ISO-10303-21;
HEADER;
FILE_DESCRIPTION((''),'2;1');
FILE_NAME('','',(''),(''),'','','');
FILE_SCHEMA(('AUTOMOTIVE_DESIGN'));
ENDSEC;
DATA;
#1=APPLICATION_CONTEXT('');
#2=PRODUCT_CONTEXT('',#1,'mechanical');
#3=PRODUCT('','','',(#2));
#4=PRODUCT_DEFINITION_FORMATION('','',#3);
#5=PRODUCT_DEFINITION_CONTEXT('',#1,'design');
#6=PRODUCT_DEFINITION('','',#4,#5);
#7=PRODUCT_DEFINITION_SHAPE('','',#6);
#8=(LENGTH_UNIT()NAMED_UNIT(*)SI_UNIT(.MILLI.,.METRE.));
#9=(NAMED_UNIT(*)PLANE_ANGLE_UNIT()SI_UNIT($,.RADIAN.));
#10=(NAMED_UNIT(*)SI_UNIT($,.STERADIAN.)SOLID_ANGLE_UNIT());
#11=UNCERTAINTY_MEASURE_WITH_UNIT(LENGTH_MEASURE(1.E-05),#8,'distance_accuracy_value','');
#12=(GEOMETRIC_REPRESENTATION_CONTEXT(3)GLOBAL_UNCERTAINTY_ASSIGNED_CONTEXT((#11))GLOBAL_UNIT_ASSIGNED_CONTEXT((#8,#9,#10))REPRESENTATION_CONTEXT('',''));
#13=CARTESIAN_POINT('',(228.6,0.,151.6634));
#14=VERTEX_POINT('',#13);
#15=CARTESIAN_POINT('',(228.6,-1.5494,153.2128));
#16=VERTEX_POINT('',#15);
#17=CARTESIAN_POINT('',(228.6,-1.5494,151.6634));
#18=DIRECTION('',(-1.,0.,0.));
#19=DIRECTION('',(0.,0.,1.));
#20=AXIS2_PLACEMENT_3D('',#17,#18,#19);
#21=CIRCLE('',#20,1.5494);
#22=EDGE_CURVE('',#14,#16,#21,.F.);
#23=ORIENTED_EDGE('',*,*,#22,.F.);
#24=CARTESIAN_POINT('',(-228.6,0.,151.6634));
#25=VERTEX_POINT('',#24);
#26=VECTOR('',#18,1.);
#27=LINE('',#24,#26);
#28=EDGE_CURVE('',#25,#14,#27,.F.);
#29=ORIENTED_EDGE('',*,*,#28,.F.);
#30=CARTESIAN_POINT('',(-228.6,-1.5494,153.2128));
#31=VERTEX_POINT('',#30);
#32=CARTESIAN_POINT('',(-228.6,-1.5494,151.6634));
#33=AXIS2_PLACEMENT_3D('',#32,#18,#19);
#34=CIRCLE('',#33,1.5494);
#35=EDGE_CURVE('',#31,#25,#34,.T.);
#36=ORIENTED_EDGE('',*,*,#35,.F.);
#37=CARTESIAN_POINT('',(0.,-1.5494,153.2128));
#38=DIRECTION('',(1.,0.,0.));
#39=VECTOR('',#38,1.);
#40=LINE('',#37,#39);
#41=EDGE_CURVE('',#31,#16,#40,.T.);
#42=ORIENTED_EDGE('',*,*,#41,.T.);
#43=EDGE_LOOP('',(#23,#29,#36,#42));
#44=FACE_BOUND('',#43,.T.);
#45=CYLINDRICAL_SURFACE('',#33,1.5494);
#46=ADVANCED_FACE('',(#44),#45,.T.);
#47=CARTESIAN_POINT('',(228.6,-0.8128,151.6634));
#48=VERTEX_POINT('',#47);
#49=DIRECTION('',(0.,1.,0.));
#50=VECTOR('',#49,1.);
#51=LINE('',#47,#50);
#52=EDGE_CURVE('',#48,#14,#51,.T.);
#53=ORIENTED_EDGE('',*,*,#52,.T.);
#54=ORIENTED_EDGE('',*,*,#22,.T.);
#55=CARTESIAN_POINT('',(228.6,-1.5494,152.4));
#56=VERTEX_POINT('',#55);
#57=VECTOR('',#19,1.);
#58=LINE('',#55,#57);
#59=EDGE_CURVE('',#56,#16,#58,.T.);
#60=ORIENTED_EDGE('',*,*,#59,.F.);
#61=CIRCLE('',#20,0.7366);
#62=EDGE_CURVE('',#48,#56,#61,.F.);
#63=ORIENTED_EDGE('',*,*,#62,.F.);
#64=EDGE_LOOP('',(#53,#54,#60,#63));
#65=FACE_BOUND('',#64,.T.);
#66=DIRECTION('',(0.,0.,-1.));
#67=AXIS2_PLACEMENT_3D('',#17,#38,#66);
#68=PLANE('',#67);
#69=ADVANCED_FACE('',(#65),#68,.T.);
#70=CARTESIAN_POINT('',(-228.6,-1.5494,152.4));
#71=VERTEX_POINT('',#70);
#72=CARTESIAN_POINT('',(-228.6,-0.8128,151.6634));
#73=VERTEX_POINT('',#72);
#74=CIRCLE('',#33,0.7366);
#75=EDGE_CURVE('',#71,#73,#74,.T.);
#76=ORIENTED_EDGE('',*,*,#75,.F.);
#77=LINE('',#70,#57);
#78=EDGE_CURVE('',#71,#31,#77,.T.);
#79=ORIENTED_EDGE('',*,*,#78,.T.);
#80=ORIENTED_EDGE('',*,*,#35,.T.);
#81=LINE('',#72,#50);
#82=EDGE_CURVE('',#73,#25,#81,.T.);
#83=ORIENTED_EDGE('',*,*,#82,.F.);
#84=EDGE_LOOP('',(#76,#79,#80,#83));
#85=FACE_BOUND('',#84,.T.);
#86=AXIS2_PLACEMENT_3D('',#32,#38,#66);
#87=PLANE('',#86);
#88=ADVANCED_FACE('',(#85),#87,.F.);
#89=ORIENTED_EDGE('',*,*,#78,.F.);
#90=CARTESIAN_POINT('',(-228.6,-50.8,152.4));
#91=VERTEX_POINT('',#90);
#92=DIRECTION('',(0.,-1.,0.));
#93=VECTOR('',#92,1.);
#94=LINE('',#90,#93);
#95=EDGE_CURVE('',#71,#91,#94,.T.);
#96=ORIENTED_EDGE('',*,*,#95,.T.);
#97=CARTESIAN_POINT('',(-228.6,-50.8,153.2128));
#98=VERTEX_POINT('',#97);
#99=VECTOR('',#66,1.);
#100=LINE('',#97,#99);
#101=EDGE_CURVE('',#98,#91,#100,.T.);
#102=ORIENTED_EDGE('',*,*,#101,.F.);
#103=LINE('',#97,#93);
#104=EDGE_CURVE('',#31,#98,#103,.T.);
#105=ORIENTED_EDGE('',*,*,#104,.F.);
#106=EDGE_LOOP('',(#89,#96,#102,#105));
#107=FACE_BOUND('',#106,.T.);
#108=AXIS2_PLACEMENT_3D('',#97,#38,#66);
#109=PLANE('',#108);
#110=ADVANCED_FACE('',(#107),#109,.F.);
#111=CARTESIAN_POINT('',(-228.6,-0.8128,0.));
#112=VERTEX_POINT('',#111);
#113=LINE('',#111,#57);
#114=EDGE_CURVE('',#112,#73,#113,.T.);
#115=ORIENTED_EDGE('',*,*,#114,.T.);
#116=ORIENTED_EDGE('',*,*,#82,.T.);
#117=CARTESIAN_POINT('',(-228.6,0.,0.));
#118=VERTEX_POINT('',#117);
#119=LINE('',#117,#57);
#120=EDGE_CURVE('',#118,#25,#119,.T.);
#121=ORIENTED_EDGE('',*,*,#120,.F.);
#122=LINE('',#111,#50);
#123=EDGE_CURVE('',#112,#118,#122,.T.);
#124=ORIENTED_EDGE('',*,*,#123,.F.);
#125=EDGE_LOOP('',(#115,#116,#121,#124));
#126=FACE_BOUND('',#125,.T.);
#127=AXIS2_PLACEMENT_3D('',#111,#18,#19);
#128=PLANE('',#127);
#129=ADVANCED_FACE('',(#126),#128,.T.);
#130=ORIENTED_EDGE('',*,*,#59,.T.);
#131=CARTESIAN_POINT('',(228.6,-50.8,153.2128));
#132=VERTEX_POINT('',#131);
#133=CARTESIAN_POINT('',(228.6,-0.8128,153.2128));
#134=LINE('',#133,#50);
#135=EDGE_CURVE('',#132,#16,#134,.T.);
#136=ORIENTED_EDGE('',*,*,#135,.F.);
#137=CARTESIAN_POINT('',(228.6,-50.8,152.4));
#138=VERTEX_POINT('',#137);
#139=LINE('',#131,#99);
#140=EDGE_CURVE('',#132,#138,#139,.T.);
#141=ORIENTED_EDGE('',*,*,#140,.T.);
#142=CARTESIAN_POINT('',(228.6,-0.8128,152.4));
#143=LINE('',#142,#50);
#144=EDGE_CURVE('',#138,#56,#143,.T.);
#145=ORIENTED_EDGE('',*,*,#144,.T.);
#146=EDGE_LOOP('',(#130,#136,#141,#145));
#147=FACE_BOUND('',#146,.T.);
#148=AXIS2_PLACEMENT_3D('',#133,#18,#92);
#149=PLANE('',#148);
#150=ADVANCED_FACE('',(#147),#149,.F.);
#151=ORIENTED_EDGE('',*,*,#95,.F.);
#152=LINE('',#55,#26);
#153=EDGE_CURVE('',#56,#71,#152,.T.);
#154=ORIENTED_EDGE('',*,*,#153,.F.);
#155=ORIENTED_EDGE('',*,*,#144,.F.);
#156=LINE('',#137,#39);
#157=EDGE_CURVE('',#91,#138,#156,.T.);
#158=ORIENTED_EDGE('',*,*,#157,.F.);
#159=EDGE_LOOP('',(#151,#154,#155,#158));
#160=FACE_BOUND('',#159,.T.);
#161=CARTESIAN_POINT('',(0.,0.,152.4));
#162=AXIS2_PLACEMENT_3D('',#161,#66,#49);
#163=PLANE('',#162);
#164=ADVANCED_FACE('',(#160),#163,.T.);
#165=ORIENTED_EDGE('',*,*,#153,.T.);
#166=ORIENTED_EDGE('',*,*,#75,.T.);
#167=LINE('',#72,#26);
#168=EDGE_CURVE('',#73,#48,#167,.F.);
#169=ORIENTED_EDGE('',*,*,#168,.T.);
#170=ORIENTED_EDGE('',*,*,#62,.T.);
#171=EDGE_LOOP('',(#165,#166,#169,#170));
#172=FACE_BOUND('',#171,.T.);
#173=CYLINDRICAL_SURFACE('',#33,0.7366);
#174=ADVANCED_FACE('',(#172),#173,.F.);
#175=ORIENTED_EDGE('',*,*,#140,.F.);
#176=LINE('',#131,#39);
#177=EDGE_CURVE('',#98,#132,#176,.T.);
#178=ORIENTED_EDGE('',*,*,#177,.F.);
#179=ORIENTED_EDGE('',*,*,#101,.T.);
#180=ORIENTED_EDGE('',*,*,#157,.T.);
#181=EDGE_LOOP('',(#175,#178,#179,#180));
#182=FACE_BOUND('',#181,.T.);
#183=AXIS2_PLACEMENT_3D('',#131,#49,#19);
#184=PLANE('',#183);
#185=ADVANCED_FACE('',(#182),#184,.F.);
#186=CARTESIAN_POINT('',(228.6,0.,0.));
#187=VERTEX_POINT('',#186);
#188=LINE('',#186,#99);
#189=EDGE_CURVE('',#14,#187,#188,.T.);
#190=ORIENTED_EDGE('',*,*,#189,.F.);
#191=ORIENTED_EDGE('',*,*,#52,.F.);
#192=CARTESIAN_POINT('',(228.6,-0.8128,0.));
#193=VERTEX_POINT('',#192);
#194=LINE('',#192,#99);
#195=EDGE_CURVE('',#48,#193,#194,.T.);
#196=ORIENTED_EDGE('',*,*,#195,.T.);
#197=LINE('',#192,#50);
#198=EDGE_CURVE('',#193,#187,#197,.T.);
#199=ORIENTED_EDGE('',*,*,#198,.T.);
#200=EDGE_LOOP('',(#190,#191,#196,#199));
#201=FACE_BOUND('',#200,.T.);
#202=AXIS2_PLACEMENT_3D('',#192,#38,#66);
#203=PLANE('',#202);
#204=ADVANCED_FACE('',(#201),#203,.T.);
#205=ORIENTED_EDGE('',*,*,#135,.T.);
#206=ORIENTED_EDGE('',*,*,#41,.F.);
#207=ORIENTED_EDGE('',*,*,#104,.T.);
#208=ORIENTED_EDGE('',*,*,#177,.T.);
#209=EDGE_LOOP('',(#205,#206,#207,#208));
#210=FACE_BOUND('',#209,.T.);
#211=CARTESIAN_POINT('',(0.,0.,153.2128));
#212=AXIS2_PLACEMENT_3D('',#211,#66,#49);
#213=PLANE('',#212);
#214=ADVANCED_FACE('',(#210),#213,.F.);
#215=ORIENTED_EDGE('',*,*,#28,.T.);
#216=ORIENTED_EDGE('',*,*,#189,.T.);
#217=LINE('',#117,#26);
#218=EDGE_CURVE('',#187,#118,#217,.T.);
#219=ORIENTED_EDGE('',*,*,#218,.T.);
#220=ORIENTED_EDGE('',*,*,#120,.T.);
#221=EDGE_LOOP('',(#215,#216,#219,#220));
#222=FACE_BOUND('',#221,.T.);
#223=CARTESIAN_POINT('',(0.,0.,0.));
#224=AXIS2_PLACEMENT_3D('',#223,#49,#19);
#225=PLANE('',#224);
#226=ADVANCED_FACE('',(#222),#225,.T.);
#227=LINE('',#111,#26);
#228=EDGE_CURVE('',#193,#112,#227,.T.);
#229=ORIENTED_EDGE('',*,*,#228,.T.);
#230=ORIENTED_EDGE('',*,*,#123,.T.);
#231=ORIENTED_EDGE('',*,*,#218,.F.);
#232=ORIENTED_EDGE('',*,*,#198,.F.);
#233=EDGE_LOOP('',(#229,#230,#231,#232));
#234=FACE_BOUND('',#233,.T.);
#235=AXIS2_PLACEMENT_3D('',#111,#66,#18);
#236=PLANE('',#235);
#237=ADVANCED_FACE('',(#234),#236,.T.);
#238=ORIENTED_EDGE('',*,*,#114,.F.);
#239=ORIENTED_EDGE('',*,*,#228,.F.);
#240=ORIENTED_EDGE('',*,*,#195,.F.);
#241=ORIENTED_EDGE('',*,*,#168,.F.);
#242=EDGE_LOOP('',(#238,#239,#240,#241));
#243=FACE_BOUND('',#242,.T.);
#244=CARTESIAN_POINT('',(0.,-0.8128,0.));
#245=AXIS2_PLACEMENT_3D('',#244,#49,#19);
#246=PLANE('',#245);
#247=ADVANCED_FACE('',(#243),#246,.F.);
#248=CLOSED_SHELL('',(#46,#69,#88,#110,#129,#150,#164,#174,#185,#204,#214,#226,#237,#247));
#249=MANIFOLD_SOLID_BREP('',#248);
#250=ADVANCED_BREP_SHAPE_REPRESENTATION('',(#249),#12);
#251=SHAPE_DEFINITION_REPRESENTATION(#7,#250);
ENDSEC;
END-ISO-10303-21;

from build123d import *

# Parameters (mm, degrees)
SKETCH1_W                    = 457.2
SKETCH1_H                    = 152.4
BASE_FLANGE1_DEPTH           = 0.8128
EDGE_FLANGE1_STRIP_W         = 4.7244
EDGE_FLANGE1_STRIP_H         = 0.8128
EDGE_FLANGE1_STRIP_CUT_DEPTH = 457.2
EDGE_FLANGE1_DEPTH           = 457.2


# Sheet-metal steps are written as plain solids
with BuildPart() as part:
    # Sketch1 → Base-Flange1 (new body)
    with BuildSketch(Plane(origin=(0, 0, 0), x_dir=(1, 0, 0), z_dir=(0, 1, 0))):
        with Locations((0, -76.2)):
            Rectangle(SKETCH1_W, SKETCH1_H)
    extrude(amount=-BASE_FLANGE1_DEPTH)

    # Edge-Flange1 strip (across the edge) → Edge-Flange1 strip cut (cut)
    with BuildSketch(Plane(origin=(228.6, -0.8128, 152.4), x_dir=(0, 0, -1), z_dir=(-1, 0, 0))):
        with Locations((-1.6256, -0.4064)):
            Rectangle(EDGE_FLANGE1_STRIP_W, EDGE_FLANGE1_STRIP_H)
    extrude(amount=EDGE_FLANGE1_STRIP_CUT_DEPTH, mode=Mode.SUBTRACT)

    # Edge-Flange1 section (across the edge) → Edge-Flange1 (add)
    with BuildSketch(Plane(origin=(228.6, -0.8128, 152.4), x_dir=(0, 0, -1), z_dir=(-1, 0, 0))):
        with BuildLine():
            Line((-0.8128, 0.7366), (-0.8128, 49.9872))
            Line((-0.8128, 49.9872), (0, 49.9872))
            Line((0, 49.9872), (0, 0.7366))
            ThreePointArc((0, 0.7366), (0.215745145, 0.215745145), (0.7366, 0))
            Line((0.7366, 0), (0.7366, -0.8128))
            ThreePointArc((0.7366, -0.8128), (-0.358991247, -0.358991247), (-0.8128, 0.7366))
        make_face()
    extrude(amount=EDGE_FLANGE1_DEPTH)


solid = part.part
